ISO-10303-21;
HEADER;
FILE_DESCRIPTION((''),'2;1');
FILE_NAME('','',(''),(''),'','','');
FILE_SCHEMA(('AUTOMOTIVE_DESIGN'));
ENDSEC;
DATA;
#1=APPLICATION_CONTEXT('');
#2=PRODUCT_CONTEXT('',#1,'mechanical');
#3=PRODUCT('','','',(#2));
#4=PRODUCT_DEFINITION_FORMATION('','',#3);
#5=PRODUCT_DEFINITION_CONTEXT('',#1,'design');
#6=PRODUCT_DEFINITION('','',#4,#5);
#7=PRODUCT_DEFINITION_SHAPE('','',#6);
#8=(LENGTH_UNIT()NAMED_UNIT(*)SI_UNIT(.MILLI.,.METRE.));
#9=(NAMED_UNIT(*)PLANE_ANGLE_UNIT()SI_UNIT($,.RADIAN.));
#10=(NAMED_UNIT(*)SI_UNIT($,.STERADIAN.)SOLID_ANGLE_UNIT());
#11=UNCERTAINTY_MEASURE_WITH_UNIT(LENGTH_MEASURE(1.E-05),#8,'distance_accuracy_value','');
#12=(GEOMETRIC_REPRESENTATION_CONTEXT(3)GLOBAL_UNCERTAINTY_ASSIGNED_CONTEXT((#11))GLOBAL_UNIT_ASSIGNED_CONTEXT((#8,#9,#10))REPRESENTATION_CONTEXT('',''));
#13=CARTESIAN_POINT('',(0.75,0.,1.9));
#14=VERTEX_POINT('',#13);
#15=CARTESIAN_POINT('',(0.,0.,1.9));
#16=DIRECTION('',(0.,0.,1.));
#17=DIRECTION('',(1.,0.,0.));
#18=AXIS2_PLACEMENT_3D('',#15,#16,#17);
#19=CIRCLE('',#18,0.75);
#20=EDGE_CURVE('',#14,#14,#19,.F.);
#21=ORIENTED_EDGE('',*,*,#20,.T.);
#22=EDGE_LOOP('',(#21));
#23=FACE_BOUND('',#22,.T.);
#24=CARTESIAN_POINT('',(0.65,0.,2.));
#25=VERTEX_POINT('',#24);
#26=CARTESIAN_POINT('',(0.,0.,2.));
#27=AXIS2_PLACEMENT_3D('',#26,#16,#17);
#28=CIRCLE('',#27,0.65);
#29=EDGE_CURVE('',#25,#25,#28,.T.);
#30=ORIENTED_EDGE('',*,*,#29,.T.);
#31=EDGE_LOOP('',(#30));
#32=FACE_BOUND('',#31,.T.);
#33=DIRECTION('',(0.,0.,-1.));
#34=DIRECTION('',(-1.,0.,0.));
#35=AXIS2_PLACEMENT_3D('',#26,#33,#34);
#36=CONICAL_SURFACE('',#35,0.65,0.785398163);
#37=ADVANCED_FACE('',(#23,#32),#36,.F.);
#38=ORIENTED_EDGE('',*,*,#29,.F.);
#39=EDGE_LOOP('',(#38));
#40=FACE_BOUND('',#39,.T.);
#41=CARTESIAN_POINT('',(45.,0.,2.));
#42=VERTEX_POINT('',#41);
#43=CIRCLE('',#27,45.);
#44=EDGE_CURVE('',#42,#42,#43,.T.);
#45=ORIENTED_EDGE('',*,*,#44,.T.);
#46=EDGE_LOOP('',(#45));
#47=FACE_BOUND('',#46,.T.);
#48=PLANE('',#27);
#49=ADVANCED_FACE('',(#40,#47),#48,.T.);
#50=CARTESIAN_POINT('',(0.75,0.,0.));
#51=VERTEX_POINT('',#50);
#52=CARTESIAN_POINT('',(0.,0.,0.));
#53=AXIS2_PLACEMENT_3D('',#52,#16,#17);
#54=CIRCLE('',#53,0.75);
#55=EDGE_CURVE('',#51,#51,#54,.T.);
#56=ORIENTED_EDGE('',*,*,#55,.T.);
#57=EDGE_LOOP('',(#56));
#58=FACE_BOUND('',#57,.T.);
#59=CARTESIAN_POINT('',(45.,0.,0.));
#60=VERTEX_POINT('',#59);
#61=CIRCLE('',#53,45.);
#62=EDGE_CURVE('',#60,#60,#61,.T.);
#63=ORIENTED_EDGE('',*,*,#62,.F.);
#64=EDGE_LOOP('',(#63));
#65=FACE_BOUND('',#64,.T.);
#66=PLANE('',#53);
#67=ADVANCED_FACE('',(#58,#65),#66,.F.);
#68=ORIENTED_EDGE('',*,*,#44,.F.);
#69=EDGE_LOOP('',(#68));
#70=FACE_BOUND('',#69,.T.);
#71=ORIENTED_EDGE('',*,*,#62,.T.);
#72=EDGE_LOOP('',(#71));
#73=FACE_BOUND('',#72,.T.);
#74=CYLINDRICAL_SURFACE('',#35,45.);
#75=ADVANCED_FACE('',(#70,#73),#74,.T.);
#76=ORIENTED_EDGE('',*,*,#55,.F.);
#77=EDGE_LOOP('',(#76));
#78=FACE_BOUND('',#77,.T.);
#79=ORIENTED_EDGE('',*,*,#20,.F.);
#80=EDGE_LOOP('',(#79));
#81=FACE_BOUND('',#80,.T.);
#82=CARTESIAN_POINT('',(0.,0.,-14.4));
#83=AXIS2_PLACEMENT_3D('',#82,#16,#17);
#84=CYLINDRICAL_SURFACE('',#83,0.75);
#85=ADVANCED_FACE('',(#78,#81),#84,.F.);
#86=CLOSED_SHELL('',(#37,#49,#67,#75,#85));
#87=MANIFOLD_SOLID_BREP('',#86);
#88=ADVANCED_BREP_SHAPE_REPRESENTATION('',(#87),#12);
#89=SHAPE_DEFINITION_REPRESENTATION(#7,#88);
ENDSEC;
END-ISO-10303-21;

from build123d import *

# Parameters (mm, degrees)
SKETCH1_R           = 45
BOSS_EXTRUDE1_DEPTH = 2


# Read off the part's stored shape, not the designer's step: Cavity1
with BuildPart() as part:
    # Sketch1 → Boss-Extrude1 (new body)
    with BuildSketch(Plane.XY):
        Circle(SKETCH1_R)
    extrude(amount=BOSS_EXTRUDE1_DEPTH)

    # Cavity1 outline → Cavity1 (revolve, cut)
    with BuildSketch(Plane.XZ):
        Polygon((0.75, 0), (0.75, 1.9), (0.65, 2), (0, 2), (0, 0), align=None)
    revolve(axis=Axis((0, 0, 0), (0, 0, 1)), mode=Mode.SUBTRACT)


solid = part.part
